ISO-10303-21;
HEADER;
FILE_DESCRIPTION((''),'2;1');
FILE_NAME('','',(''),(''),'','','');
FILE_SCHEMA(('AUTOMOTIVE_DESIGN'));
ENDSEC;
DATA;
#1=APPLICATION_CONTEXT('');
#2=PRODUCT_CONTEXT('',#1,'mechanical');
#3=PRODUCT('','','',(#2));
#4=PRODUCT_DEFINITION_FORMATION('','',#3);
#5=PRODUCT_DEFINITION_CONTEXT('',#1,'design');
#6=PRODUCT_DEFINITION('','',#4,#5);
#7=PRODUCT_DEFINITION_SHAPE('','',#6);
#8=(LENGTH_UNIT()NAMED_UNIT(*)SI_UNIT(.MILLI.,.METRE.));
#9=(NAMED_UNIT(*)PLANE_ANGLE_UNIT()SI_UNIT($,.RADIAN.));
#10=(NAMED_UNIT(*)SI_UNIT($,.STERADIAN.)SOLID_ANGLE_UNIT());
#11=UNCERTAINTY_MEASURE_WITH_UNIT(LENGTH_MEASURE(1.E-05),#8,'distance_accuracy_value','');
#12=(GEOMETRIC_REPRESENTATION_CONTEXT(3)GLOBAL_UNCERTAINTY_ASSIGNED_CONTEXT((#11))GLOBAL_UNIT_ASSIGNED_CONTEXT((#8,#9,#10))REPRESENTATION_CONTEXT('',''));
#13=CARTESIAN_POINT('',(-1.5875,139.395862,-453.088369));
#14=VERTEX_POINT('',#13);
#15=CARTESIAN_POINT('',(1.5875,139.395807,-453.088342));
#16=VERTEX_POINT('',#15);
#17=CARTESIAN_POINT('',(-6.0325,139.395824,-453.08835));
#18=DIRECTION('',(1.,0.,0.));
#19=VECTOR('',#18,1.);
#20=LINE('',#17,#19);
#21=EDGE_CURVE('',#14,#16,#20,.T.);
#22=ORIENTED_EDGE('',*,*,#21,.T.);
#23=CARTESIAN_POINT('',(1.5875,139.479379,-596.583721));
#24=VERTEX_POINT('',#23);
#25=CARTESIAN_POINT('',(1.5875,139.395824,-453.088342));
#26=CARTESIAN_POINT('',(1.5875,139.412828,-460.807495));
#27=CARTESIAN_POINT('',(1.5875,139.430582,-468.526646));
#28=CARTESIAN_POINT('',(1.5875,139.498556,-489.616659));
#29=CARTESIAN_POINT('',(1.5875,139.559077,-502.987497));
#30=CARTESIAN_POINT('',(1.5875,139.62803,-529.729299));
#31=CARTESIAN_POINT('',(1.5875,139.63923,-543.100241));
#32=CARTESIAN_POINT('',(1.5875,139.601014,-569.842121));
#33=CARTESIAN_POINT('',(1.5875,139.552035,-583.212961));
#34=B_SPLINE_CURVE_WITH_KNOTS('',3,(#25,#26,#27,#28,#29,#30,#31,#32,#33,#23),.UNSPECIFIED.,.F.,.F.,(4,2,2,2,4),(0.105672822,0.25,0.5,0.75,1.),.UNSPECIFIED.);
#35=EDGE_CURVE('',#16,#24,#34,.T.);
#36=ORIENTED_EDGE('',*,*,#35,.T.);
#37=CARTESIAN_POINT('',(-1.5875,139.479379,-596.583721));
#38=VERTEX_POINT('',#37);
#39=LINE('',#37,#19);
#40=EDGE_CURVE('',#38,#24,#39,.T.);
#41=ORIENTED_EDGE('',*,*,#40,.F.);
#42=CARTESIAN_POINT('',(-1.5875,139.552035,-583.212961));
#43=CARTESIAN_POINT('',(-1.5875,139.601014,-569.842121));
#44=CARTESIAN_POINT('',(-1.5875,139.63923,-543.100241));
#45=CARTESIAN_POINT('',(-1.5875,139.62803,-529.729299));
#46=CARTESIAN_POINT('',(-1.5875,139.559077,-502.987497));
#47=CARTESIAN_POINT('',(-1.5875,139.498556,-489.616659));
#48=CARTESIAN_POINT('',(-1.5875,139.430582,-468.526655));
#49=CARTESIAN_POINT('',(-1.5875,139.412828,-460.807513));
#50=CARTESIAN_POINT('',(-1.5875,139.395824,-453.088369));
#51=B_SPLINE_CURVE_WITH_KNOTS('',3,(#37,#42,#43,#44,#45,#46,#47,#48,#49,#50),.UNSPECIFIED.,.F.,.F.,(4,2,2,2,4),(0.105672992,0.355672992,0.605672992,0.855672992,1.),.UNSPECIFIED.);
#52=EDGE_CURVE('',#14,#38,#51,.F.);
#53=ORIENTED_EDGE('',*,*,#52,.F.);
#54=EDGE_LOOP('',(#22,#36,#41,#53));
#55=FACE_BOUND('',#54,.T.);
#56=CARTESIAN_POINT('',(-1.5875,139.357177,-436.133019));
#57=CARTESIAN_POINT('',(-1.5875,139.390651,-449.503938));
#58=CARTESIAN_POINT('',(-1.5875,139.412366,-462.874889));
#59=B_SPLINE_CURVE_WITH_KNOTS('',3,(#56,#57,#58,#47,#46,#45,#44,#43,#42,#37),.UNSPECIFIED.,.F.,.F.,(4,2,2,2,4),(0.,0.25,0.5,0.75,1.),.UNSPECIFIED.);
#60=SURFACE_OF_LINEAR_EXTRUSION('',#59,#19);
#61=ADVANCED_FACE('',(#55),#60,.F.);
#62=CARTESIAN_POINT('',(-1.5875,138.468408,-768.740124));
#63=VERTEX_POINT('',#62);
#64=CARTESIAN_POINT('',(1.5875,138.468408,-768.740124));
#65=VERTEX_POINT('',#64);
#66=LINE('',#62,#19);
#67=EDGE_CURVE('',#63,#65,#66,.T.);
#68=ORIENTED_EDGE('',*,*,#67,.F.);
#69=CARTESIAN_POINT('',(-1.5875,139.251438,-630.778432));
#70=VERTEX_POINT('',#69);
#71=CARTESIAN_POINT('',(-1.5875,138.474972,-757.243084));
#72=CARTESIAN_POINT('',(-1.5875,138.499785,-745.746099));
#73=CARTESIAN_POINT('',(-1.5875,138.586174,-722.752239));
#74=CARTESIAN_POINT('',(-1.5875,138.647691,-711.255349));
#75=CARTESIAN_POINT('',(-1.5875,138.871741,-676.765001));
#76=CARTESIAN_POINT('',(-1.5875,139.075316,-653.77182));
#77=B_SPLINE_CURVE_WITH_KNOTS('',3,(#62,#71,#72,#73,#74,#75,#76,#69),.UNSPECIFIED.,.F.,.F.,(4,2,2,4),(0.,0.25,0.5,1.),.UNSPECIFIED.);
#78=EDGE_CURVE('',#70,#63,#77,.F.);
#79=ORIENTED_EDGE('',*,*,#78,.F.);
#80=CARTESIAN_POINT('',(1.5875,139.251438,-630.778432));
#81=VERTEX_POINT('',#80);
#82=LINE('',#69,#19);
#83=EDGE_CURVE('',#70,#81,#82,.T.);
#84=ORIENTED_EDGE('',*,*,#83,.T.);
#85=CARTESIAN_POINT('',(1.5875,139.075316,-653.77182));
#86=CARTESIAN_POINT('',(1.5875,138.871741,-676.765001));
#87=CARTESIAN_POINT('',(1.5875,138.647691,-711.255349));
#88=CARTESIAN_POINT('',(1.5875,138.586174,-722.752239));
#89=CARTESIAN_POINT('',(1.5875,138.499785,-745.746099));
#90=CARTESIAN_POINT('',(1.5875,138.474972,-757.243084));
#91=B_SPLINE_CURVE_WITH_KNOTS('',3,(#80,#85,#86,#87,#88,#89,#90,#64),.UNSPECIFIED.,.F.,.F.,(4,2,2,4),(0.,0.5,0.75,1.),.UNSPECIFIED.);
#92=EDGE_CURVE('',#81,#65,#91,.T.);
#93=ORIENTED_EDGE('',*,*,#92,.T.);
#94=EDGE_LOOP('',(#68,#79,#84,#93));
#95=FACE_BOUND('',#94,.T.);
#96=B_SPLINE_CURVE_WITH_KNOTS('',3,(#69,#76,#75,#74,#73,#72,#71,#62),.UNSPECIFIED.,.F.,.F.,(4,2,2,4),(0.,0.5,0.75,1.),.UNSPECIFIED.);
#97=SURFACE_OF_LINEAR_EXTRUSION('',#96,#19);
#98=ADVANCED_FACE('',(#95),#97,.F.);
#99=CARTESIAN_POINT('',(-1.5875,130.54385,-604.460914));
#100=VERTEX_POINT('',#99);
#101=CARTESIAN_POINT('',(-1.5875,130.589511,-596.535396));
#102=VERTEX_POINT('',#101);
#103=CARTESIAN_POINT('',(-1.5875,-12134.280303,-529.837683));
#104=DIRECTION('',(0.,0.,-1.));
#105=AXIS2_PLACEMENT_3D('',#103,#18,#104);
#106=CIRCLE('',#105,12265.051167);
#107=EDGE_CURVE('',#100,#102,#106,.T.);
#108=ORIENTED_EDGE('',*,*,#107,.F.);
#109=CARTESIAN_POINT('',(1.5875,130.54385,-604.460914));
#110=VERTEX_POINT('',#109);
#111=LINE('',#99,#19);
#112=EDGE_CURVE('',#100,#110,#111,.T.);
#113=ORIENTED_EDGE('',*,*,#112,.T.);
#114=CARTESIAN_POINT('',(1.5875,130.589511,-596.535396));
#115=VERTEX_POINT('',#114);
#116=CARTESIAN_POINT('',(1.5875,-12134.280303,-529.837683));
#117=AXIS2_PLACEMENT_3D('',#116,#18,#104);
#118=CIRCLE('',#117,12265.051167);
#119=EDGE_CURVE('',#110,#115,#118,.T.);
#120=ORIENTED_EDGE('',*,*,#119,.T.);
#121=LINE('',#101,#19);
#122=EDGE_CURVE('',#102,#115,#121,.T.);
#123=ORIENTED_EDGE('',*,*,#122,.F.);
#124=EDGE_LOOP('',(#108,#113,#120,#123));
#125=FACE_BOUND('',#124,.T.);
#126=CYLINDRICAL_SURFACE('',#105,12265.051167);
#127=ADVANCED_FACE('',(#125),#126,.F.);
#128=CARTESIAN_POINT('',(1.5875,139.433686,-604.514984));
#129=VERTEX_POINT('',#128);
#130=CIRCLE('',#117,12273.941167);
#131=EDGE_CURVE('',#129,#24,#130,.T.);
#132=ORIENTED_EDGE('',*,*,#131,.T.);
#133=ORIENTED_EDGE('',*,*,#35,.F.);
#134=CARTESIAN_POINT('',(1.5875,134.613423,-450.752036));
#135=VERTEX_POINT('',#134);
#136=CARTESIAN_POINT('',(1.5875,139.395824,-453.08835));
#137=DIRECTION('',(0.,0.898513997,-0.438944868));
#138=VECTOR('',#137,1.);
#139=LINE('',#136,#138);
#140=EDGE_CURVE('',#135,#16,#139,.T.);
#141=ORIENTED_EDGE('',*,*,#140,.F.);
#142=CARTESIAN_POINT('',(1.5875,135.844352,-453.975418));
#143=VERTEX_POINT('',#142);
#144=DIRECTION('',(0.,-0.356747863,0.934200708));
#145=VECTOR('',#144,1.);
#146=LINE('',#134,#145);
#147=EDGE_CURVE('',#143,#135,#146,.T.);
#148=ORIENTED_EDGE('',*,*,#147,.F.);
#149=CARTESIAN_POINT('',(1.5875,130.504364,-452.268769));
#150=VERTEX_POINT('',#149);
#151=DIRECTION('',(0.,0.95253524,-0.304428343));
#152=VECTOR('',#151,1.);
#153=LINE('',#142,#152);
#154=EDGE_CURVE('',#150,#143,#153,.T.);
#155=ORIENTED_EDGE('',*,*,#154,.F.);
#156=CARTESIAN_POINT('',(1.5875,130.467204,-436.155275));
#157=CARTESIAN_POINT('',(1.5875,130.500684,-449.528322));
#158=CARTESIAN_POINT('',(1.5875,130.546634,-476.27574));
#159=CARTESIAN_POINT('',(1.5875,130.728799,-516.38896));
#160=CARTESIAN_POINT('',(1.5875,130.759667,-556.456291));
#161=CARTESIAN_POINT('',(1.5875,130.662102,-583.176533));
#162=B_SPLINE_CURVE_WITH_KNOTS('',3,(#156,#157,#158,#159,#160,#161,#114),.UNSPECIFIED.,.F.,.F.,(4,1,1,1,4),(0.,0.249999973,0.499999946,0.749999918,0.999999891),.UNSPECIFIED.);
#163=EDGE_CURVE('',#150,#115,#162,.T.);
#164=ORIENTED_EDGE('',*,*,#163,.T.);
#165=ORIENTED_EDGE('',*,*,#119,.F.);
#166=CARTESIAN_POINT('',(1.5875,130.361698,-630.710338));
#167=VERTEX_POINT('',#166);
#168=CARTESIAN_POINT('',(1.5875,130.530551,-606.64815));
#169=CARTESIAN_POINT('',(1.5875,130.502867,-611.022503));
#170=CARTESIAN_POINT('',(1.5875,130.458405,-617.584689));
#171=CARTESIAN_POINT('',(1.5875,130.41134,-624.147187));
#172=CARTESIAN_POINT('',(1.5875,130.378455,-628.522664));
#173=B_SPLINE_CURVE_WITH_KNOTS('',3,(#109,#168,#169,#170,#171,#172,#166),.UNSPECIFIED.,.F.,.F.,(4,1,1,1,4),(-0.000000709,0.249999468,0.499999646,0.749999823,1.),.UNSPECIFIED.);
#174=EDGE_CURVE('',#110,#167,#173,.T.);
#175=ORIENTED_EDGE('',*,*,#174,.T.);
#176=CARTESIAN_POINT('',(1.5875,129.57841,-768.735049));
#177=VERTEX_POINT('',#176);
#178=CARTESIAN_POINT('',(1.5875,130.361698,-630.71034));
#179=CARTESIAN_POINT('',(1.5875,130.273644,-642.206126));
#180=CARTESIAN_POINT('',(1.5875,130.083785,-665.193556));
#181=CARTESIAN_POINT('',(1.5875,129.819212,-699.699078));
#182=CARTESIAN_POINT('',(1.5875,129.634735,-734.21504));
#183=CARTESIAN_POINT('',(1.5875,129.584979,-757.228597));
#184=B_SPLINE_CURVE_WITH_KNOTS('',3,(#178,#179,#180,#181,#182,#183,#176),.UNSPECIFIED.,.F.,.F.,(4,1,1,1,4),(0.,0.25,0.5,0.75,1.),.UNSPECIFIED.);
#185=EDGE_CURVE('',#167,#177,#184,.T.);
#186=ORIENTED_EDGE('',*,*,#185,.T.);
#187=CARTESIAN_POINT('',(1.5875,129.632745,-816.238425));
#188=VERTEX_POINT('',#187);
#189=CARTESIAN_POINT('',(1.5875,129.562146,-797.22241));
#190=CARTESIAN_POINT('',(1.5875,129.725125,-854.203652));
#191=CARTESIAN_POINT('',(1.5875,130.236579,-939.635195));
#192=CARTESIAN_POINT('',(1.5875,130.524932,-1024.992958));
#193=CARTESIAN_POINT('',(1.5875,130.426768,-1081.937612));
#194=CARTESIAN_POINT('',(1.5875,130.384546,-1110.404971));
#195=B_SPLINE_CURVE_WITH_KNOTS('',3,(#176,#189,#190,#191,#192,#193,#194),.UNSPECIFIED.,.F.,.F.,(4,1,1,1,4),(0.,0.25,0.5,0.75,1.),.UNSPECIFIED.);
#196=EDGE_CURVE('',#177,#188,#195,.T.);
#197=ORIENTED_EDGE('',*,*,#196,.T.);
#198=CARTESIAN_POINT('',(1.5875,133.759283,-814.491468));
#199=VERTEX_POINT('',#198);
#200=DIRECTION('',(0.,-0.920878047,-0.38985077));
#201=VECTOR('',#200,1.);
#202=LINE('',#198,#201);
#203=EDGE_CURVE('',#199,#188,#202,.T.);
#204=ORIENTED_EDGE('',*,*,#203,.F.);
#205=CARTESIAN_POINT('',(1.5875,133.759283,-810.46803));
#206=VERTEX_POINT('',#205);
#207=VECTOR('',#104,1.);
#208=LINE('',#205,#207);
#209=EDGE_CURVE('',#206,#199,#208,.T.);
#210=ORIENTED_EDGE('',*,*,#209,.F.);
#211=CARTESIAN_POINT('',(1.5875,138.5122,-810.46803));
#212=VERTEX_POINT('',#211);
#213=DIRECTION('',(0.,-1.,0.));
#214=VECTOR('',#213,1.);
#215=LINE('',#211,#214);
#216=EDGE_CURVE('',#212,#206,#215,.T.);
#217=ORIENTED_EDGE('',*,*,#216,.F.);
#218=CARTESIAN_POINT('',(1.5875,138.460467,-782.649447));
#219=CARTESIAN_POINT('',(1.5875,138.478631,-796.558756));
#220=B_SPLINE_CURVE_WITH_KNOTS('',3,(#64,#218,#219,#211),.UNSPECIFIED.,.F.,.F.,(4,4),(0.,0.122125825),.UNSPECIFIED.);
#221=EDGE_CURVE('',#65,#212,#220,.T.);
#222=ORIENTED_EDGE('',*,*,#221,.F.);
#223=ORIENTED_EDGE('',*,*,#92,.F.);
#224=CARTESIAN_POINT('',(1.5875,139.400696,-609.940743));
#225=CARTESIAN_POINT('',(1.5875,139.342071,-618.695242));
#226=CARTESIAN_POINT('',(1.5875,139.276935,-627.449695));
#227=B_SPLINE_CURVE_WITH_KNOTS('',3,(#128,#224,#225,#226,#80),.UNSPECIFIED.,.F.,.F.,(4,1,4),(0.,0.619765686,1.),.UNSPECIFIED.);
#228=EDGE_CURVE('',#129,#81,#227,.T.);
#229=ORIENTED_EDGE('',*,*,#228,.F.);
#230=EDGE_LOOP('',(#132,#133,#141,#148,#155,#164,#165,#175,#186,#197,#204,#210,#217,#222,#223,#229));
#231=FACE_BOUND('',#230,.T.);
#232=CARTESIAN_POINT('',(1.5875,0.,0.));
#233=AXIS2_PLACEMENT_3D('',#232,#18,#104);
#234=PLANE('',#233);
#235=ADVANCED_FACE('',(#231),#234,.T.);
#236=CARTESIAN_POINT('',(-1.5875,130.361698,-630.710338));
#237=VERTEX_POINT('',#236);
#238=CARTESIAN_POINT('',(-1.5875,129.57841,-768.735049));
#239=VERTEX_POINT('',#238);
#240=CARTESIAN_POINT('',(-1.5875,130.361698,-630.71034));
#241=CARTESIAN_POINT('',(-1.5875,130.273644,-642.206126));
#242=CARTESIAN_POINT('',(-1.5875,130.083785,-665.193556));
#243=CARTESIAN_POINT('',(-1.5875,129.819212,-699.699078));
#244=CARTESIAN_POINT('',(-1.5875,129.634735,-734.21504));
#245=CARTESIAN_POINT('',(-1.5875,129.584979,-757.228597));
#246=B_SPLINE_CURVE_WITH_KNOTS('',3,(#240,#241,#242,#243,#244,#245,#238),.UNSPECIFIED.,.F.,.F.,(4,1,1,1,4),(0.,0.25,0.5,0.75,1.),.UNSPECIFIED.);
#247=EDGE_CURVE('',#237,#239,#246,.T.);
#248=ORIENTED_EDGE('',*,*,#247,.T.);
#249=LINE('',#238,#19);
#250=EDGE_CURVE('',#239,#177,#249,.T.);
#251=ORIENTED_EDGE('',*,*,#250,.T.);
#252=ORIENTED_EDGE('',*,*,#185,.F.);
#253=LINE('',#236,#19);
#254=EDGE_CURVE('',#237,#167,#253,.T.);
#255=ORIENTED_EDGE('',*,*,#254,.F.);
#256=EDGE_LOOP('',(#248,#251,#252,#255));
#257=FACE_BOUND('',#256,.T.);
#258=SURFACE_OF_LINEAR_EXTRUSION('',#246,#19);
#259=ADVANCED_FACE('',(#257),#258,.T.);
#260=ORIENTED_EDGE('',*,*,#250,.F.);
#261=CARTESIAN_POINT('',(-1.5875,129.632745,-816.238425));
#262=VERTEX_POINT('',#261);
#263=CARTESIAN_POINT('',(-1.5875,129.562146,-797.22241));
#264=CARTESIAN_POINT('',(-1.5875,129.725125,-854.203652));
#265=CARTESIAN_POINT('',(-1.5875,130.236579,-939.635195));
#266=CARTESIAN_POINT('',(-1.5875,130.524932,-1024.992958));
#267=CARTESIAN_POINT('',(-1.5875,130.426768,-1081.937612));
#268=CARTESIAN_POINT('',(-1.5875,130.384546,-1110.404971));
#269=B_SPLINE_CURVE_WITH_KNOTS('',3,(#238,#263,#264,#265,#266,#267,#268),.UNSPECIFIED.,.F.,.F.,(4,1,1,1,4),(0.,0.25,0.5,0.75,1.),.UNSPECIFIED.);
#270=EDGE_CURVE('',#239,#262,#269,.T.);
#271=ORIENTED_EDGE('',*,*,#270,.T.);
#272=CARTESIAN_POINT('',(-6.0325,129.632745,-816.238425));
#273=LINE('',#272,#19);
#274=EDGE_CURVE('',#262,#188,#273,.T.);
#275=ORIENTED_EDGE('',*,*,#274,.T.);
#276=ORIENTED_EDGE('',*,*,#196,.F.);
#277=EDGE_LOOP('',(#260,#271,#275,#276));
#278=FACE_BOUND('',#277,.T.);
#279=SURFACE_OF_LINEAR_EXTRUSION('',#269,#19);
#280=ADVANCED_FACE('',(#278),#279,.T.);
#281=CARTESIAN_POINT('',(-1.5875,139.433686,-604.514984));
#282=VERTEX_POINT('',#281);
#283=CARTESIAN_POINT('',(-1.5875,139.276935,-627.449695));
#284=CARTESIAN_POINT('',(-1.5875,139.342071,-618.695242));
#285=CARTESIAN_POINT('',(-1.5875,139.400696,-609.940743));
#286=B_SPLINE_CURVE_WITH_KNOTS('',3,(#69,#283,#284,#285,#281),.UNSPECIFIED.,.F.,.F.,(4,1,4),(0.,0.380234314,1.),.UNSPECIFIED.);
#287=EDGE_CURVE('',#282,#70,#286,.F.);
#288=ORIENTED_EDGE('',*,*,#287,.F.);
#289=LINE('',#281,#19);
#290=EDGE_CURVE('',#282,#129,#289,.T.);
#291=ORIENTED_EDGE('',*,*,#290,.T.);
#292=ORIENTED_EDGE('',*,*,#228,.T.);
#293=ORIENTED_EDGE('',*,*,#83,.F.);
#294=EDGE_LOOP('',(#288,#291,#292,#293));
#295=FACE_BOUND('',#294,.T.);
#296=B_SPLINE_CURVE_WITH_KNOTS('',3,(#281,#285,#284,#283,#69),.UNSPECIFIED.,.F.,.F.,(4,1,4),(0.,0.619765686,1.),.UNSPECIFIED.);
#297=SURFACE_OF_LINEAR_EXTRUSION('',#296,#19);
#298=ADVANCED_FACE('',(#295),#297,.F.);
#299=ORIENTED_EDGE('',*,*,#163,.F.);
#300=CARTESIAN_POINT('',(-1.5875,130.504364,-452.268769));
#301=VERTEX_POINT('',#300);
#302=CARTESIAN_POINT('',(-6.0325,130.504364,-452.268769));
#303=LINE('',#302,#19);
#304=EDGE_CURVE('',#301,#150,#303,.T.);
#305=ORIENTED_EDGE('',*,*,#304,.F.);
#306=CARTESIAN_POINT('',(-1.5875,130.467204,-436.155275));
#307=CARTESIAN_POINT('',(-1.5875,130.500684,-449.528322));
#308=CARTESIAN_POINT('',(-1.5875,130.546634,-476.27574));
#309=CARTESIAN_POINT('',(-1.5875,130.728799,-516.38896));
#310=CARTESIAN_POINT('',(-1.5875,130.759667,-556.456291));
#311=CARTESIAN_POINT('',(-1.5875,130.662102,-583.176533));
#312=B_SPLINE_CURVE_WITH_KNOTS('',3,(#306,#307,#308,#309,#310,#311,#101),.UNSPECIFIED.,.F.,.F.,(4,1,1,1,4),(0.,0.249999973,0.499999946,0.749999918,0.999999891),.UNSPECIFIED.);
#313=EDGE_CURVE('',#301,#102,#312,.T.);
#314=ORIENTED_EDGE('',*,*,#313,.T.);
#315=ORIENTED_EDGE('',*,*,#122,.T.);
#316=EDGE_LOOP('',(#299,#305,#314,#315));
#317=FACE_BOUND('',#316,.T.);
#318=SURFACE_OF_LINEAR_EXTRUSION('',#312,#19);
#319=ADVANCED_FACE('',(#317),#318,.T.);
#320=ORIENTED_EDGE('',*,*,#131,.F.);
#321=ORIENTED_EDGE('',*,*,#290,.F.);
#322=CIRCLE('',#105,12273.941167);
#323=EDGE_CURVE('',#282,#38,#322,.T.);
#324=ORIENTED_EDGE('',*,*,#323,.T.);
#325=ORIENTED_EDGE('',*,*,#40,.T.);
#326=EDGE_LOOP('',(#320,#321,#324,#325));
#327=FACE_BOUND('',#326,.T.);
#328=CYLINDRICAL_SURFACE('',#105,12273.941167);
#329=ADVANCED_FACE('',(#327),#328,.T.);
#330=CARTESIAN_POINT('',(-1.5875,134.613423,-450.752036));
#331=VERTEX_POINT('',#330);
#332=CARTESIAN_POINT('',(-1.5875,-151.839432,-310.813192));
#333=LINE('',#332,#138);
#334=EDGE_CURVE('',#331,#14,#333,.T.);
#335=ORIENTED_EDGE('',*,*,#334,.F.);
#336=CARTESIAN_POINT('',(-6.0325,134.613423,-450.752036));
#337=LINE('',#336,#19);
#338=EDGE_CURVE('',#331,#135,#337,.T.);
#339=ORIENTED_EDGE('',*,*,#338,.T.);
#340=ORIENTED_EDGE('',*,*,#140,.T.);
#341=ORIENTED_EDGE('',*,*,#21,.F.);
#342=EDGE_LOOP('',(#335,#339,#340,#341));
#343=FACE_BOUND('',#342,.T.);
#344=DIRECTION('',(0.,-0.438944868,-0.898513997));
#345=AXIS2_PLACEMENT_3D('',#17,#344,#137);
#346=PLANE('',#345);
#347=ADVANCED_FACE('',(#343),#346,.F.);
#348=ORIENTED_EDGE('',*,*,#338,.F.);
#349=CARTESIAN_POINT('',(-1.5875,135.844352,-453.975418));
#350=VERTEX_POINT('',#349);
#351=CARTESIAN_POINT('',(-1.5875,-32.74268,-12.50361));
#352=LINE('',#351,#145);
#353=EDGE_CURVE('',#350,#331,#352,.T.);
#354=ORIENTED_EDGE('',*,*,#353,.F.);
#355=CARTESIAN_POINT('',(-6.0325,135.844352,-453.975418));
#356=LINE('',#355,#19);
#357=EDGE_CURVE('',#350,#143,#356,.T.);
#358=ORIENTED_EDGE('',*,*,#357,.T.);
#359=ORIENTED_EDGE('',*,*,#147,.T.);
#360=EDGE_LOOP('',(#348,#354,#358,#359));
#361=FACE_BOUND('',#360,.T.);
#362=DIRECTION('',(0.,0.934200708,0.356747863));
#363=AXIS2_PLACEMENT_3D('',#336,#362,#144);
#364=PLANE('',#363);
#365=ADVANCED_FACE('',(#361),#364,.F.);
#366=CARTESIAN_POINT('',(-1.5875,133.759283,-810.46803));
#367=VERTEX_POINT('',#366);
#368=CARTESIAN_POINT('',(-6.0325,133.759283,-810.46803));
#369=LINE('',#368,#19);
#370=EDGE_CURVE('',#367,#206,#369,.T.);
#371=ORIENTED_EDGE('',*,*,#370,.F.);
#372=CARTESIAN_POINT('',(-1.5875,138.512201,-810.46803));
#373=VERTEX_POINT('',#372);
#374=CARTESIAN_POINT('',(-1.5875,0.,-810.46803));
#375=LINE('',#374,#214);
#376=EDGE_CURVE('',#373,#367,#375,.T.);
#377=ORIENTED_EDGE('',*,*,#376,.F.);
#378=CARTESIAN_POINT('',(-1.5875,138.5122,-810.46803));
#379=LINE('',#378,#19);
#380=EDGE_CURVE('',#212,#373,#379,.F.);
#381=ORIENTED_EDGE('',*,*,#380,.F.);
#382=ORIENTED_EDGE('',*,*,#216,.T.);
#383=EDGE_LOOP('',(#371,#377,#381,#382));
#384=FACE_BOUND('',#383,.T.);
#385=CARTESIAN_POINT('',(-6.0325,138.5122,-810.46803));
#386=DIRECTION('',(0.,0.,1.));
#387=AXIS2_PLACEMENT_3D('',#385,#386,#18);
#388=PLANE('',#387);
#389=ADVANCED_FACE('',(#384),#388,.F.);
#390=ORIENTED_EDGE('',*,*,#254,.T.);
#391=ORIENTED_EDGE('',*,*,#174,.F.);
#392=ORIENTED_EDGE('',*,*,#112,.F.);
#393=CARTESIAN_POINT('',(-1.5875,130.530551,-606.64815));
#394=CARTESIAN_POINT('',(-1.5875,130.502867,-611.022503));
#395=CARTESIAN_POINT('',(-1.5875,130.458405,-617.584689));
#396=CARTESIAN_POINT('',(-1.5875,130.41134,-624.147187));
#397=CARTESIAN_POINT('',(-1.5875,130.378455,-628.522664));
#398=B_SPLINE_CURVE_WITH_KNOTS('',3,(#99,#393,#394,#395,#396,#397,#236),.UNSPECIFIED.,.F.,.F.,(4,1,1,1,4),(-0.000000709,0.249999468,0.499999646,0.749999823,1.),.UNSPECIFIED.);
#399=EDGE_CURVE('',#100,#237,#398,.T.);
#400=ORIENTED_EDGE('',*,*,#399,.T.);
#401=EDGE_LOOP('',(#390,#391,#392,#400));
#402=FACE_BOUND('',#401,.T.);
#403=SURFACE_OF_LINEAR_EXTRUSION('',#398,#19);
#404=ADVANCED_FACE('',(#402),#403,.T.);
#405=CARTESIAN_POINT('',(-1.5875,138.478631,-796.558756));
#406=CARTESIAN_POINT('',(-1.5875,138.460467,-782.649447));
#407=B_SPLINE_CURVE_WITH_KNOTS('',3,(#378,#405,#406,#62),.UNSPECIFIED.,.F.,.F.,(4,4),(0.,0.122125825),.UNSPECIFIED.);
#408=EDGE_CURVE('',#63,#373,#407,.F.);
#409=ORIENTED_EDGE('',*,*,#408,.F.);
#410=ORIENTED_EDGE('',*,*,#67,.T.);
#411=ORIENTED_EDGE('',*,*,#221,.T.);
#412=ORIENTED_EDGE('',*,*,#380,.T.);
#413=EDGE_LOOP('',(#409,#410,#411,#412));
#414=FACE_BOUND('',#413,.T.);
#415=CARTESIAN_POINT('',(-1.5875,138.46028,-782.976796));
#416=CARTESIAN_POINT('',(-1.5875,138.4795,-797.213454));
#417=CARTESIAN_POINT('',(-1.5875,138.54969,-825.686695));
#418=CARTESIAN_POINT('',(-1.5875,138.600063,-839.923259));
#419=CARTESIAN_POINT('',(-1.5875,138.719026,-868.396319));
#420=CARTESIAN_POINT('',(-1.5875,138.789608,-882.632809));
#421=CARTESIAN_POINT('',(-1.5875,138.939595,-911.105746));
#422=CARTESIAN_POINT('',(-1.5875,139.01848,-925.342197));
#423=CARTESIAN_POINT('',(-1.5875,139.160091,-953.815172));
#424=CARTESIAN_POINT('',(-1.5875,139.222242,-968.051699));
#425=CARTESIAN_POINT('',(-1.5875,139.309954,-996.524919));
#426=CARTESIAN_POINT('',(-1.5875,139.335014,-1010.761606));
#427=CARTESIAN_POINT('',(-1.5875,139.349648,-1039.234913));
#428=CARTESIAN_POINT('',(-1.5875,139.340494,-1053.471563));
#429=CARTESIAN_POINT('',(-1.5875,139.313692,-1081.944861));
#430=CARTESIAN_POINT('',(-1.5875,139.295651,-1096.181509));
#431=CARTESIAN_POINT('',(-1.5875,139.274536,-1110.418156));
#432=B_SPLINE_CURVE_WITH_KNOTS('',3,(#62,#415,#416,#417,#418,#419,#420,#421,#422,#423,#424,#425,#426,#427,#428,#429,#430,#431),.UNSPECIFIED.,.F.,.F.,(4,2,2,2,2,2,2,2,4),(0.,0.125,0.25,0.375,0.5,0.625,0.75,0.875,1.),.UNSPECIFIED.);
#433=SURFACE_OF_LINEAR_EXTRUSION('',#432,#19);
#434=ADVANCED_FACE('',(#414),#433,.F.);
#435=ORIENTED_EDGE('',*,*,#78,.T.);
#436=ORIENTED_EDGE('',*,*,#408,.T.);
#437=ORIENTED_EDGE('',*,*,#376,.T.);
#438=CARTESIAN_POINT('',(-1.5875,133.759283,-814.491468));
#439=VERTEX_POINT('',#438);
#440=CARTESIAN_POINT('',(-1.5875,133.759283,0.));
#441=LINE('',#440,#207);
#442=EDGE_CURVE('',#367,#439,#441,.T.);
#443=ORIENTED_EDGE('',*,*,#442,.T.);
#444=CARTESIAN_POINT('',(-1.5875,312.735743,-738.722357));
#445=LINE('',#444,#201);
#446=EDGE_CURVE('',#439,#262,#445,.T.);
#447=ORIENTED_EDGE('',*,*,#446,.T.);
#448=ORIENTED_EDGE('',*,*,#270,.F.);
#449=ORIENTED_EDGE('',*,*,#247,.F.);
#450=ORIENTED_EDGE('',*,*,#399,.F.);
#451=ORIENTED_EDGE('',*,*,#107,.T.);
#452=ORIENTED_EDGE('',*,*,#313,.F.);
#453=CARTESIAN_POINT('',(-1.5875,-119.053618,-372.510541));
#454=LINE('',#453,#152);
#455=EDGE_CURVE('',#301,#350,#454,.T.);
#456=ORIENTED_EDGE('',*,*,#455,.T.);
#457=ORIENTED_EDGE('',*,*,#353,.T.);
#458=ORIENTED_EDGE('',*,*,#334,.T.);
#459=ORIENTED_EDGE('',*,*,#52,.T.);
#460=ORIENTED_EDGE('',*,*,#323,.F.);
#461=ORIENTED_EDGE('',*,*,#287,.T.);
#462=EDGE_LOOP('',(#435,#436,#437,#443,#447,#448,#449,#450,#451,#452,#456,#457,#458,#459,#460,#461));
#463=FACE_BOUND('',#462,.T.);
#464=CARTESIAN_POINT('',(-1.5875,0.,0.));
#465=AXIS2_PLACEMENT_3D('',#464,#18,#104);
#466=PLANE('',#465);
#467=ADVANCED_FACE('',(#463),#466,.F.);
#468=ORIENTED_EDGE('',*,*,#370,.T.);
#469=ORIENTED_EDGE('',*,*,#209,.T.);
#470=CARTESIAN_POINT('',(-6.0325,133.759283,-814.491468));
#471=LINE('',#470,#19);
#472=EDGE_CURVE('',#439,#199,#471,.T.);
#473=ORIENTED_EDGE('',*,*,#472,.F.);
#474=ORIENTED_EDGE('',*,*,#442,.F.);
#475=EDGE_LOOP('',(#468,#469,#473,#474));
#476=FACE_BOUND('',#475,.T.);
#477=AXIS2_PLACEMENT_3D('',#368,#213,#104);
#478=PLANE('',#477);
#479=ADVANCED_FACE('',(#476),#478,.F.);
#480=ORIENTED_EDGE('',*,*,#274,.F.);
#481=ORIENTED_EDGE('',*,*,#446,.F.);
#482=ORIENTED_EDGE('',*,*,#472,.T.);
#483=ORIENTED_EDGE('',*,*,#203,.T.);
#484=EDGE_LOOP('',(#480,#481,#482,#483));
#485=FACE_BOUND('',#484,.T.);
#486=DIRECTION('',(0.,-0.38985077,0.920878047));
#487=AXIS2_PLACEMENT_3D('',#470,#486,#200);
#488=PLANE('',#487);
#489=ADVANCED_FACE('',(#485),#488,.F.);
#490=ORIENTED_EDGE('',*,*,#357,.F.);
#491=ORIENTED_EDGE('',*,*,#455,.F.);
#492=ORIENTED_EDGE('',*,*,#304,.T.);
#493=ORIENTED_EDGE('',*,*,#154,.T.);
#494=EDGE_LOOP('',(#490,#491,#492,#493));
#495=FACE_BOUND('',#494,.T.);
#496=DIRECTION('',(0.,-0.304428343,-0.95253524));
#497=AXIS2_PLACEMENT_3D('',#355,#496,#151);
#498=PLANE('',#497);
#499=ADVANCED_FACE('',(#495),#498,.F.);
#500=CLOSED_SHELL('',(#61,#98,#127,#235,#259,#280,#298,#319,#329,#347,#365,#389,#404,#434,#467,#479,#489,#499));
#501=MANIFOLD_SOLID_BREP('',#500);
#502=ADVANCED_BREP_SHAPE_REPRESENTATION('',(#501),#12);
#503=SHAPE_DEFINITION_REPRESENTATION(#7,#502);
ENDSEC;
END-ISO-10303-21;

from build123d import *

# Parameters (mm, degrees)
BOSS_EXTRUDE1_START = -1.5875
BOSS_EXTRUDE1_DEPTH = 3.175
FILLET1_R           = 2.54
CUT_EXTRUDE1_DEPTH  = 2674.191025632
FILLET2_R           = 0.762
FILLET3_R           = 0.762
CUT_EXTRUDE2_DEPTH  = 7.62


with BuildPart() as part:
    # Boss-Extrude1: read off the stored shape, not the designer's step
    # Boss-Extrude1 outline → Boss-Extrude1 (new body)
    with BuildSketch(Plane(origin=(0, 0, 0), x_dir=(0, 0, -1), z_dir=(1, 0, 0)).offset(BOSS_EXTRUDE1_START)):
        with BuildLine():
            add(Edge.make_bspline(
                [(1110.404970926, 130.384545774), (1120.170834465, 130.370061323), (1139.703057908, 130.338772026), (1168.998370974, 130.277673039), (1198.290610395, 130.194386876), (1217.81419633, 130.113940836), (1227.576506903, 130.06508052)],
                knots=[0, 0, 0, 0, 0.25, 0.5, 0.75, 1, 1, 1, 1], degree=3))
            add(Edge.make_bspline(
                [(1227.576506903, 130.06508052), (1269.911205773, 129.853195249), (1333.427746701, 129.273373321), (1418.042208161, 127.449050563), (1502.665994832, 124.913583682), (1608.454176987, 120.803299479), (1693.070073331, 116.848243245), (1735.369787733, 114.744712179)],
                knots=[0, 0, 0, 0, 0.25, 0.375, 0.5, 0.75, 1, 1, 1, 1], degree=3))
            add(Edge.make_bspline(
                [(1735.369787733, 114.744712179), (1815.995940723, 110.735232018), (1936.906650462, 104.096364548), (2098.049485168, 94.18797875), (2198.694736725, 87.314638509), (2279.130413747, 81.114418931), (2339.412950304, 76.034076608), (2399.564054334, 70.28270545), (2479.570468264, 61.127378254), (2559.292087872, 49.650907614), (2626.797554585, 38.235484735), (2656.889518578, 32.788503969), (2667.159793662, 30.877771266), (2669.54, 30.432069924)],
                knots=[0, 0, 0, 0, 0.25, 0.375, 0.5, 0.5625, 0.625, 0.6875, 0.75, 0.875, 0.9375, 0.96241067, 0.969928536, 0.969928536, 0.969928536, 0.969928536], degree=3))
            Line((2669.54, 30.432069924), (2669.54, 39.476142465))
            add(Edge.make_bspline(
                [(1735.811334709, 123.623740069), (1776.138635499, 121.618292624), (1816.460281579, 119.500621806), (1897.093668675, 115.087561885), (1937.405638896, 112.792971084), (2018.018419045, 108.018366523), (2058.319512223, 105.539122976), (2138.903780144, 100.307240032), (2179.18739793, 97.555127955), (2239.586998714, 93.080168687), (2259.716280977, 91.529837622), (2289.900442602, 89.09084343), (2299.960179135, 88.258845039), (2320.076004566, 86.552861654), (2330.132100898, 85.678962223), (2350.239356518, 83.874334847), (2360.290489794, 82.943307484), (2380.385973971, 81.003183297), (2390.430065378, 79.993418555), (2420.547026195, 76.827577532), (2440.60648589, 74.533672955), (2480.675569568, 69.556278523), (2500.68715183, 66.874150811), (2540.654290207, 61.150246295), (2560.611026428, 58.109755646), (2600.475457131, 51.702465574), (2620.382967089, 48.337538888), (2650.028116889, 43.072156367), (2659.78844051, 41.29687683), (2669.54, 39.476142465)],
                knots=[0, 0, 0, 0, 0.125, 0.125, 0.25, 0.25, 0.375, 0.375, 0.5, 0.5, 0.5625, 0.5625, 0.59375, 0.59375, 0.625, 0.625, 0.65625, 0.65625, 0.6875, 0.6875, 0.75, 0.75, 0.8125, 0.8125, 0.875, 0.875, 0.9375, 0.9375, 0.968210768, 0.968210768, 0.968210768, 0.968210768], degree=3))
            add(Edge.make_bspline(
                [(1227.621000751, 138.954969175), (1248.807303679, 138.848931677), (1269.993583155, 138.701170252), (1312.363832348, 138.270664618), (1333.547719008, 137.987407832), (1375.912368189, 137.249274813), (1397.09309738, 136.7925677), (1439.451328259, 135.701855835), (1460.629010312, 135.069210584), (1502.979101161, 133.670541385), (1524.152152736, 132.907434339), (1566.494303759, 131.284732459), (1587.663166024, 130.423163385), (1651.164052809, 127.709123983), (1693.490421561, 125.728325331), (1735.811334709, 123.623740069)],
                knots=[0, 0, 0, 0, 0.125, 0.125, 0.25, 0.25, 0.375, 0.375, 0.5, 0.5, 0.625, 0.625, 0.75, 0.75, 1, 1, 1, 1], degree=3))
            add(Edge.make_bspline(
                [(1110.418156307, 139.274535996), (1129.952027249, 139.245563914), (1149.485893504, 139.211997476), (1188.553558893, 139.115899087), (1208.087346834, 139.052735015), (1227.621000751, 138.954969175)],
                knots=[0, 0, 0, 0, 0.5, 0.5, 1, 1, 1, 1], degree=3))
            add(Edge.make_bspline(
                [(768.740124165, 138.468408213), (782.976796045, 138.460280143), (797.213453801, 138.479500079), (825.686695051, 138.549690296), (839.923258916, 138.600062665), (868.396318956, 138.719026333), (882.632808962, 138.789607972), (911.105746117, 138.939594729), (925.342197007, 139.018479563), (953.81517223, 139.160090703), (968.051699178, 139.222241505), (996.524919377, 139.30995407), (1010.761605517, 139.335014039), (1039.234912871, 139.349647552), (1053.471562869, 139.340493535), (1081.944860968, 139.313691902), (1096.181508981, 139.29565137), (1110.418156307, 139.274535996)],
                knots=[0, 0, 0, 0, 0.125, 0.125, 0.25, 0.25, 0.375, 0.375, 0.5, 0.5, 0.625, 0.625, 0.75, 0.75, 0.875, 0.875, 1, 1, 1, 1], degree=3))
            add(Edge.make_bspline(
                [(630.778432202, 139.251437536), (653.771819614, 139.075315664), (676.765000849, 138.871740519), (711.255349111, 138.647690701), (722.752238945, 138.586174182), (745.746099074, 138.499784896), (757.243084259, 138.474972158), (768.740124165, 138.468408213)],
                knots=[0, 0, 0, 0, 0.5, 0.5, 0.75, 0.75, 1, 1, 1, 1], degree=3))
            add(Edge.make_bspline(
                [(604.514984259, 139.433685568), (609.940743136, 139.400696354), (618.695242427, 139.342071397), (627.449694696, 139.276935028), (630.778432202, 139.251437536)],
                knots=[0, 0, 0, 0, 0.619765686, 1, 1, 1, 1], degree=3))
            ThreePointArc((604.514984259, 139.433685568), (600.549356142, 139.457173081), (596.583720644, 139.479379304))
            add(Edge.make_bspline(
                [(436.133018826, 139.357176562), (449.50393779, 139.390650739), (462.874888934, 139.412366015), (489.61665939, 139.498555977), (502.987497127, 139.559076553), (529.729299233, 139.628029754), (543.100240501, 139.639230481), (569.84212102, 139.601013959), (583.212960696, 139.552035302), (596.583720644, 139.479379304)],
                knots=[0, 0, 0, 0, 0.25, 0.25, 0.5, 0.5, 0.75, 0.75, 1, 1, 1, 1], degree=3))
            add(Edge.make_bspline(
                [(432.263917423, 139.347117104), (433.553617637, 139.350567112), (434.843318039, 139.353947814), (436.133018826, 139.357176562)],
                knots=[0, 0, 0, 0, 1, 1, 1, 1], degree=3))
            add(Edge.make_bspline(
                [(420.316232014, 139.305761868), (422.413235913, 139.315186344), (426.395793967, 139.330351666), (430.378363115, 139.342073082), (432.263917423, 139.347117104)],
                knots=[0, 0, 0, 0, 0.526548575, 1, 1, 1, 1], degree=3))
            add(Edge.make_bspline(
                [(376.410119779, 138.75403864), (383.726317086, 138.935561778), (391.043801196, 139.055611797), (405.679602634, 139.224192856), (412.997895507, 139.272871444), (420.316232014, 139.305761868)],
                knots=[0, 0, 0, 0, 0.5, 0.5, 1, 1, 1, 1], degree=3))
            add(Edge.make_bspline(
                [(336.49221538, 137.002990798), (349.782924989, 137.88646357), (363.094318653, 138.423658969), (376.410119779, 138.75403864)],
                knots=[0, 0, 0, 0, 1, 1, 1, 1], degree=3))
            add(Edge.make_bspline(
                [(322.369488076, 135.928469458), (327.073374868, 136.333386449), (331.781331813, 136.689844531), (336.49221538, 137.002990798)],
                knots=[0, 0, 0, 0, 1, 1, 1, 1], degree=3))
            add(Edge.make_bspline(
                [(269.769949315, 129.47895505), (274.123387467, 130.231879276), (278.485668028, 130.925946417), (287.22796256, 132.196043087), (291.608626646, 132.771988738), (300.381777496, 133.818422146), (304.774579419, 134.288963443), (313.567800313, 135.154375086), (317.967903853, 135.549407043), (322.369488076, 135.928469458)],
                knots=[0, 0, 0, 0, 0.25, 0.25, 0.5, 0.5, 0.75, 0.75, 1, 1, 1, 1], degree=3))
            add(Edge.make_bspline(
                [(135.15718457, 90.054634926), (146.043739673, 94.375230064), (156.99891695, 98.504335222), (173.56622243, 104.322560697), (179.110932848, 106.199810145), (190.24859245, 109.819698901), (195.841545849, 111.562316625), (207.065472514, 114.901345648), (212.697969124, 116.49836249), (224.005973618, 119.540534541), (229.683240596, 120.9862349), (246.767187276, 125.077694043), (258.225188059, 127.482295924), (269.769949315, 129.47895505)],
                knots=[0, 0, 0, 0, 0.25, 0.25, 0.375, 0.375, 0.5, 0.5, 0.625, 0.625, 0.75, 0.75, 1, 1, 1, 1], degree=3))
            add(Edge.make_bspline(
                [(107.049744533, 78.466050261), (116.373258882, 82.438606419), (125.737350123, 86.316143859), (135.15718457, 90.054634926)],
                knots=[0, 0, 0, 0, 1, 1, 1, 1], degree=3))
            add(Edge.make_bspline(
                [(99.06, 75.03568963), (99.223542669, 75.106424562), (100.635498802, 75.716852689), (103.297453866, 76.863328103), (105.798503999, 77.932922637), (107.049744533, 78.466050261)],
                knots=[0.484151133, 0.484151133, 0.484151133, 0.484151133, 0.515864471, 0.757931449, 1, 1, 1, 1], degree=3))
            Line((99.06, 75.03568963), (99.06, 65.345043949))
            add(Edge.make_bspline(
                [(99.06, 65.345043949), (99.380370965, 65.484464523), (100.637671455, 66.031176319), (103.17753745, 67.132002814), (106.681577323, 68.64166857), (109.249580285, 69.740028797), (110.534459652, 70.287489229)],
                knots=[0.254738807, 0.254738807, 0.254738807, 0.254738807, 0.317238807, 0.5, 0.75, 1, 1, 1, 1], degree=3))
            add(Edge.make_bspline(
                [(110.534459652, 70.287489229), (112.850658013, 71.274373329), (117.489277519, 73.236837099), (124.456688526, 76.138068453), (131.438476528, 78.994265342), (136.101204469, 80.864754132), (138.436571012, 81.791601309)],
                knots=[0, 0, 0, 0, 0.25, 0.5, 0.75, 1, 1, 1, 1], degree=3))
            add(Edge.make_bspline(
                [(138.436571012, 81.791601309), (143.826897197, 83.930883835), (154.6522834, 88.11877139), (176.408203186, 96.037596764), (203.906835742, 104.998187521), (237.39469787, 114.027149543), (259.934818065, 118.755998441), (271.284977744, 120.719001348)],
                knots=[0, 0, 0, 0, 0.125, 0.25, 0.5, 0.75, 1, 1, 1, 1], degree=3))
            add(Edge.make_bspline(
                [(271.284977744, 120.719001348), (275.558711595, 121.458140765), (284.124297478, 122.821139095), (297.036360548, 124.518896272), (310.018420247, 125.909880891), (318.766623126, 126.695286194), (323.13209925, 127.071239405)],
                knots=[5e-09, 5e-09, 5e-09, 5e-09, 0.2499992, 0.4999984, 0.7499976, 0.999996801, 0.999996801, 0.999996801, 0.999996801], degree=3))
            add(Edge.make_bspline(
                [(323.13209925, 127.071239405), (324.293050056, 127.171175344), (326.615168427, 127.365043892), (330.101568176, 127.638529754), (333.590184216, 127.895089457), (335.917953069, 128.055198639), (337.081858513, 128.132566852)],
                knots=[1.2024e-05, 1.2024e-05, 1.2024e-05, 1.2024e-05, 0.250009018, 0.500006012, 0.750003006, 1, 1, 1, 1], degree=3))
            add(Edge.make_bspline(
                [(337.081858513, 128.132566852), (340.367862287, 128.350997241), (346.939906877, 128.744909116), (356.821319657, 129.221190111), (366.716250393, 129.595096292), (373.326613137, 129.784797569), (376.630622597, 129.866773678)],
                knots=[0, 0, 0, 0, 0.25, 0.5, 0.75, 1, 1, 1, 1], degree=3))
            add(Edge.make_bspline(
                [(376.630622597, 129.866773678), (380.266394474, 129.956981294), (387.534764147, 130.106779908), (398.462206547, 130.259361028), (409.400972015, 130.358727994), (416.705417778, 130.39944419), (420.356185481, 130.415851648)],
                knots=[0, 0, 0, 0, 0.25, 0.5, 0.75, 1, 1, 1, 1], degree=3))
            add(Edge.make_bspline(
                [(420.356185481, 130.415851648), (421.350045129, 130.420318309), (423.337533562, 130.428603137), (426.320174328, 130.439402209), (429.303468332, 130.448883952), (431.293011648, 130.454488038), (432.287698861, 130.457148912)],
                knots=[0, 0, 0, 0, 0.25, 0.5, 0.75, 1, 1, 1, 1], degree=3))
            add(Edge.make_bspline(
                [(432.287698861, 130.457148912), (432.610032304, 130.45801117), (433.254717136, 130.45972707), (434.221637716, 130.462266911), (435.188505114, 130.464765142), (435.833012253, 130.466397641), (436.155274747, 130.46720442)],
                knots=[9.2e-08, 9.2e-08, 9.2e-08, 9.2e-08, 0.25, 0.5, 0.75, 1, 1, 1, 1], degree=3))
            add(Edge.make_bspline(
                [(436.155274747, 130.46720442), (449.528322363, 130.500683927), (476.275740382, 130.546633815), (516.38896029, 130.728798697), (556.456290895, 130.759667498), (583.176533448, 130.662101975), (596.535396133, 130.589510646)],
                knots=[0, 0, 0, 0, 0.249999973, 0.499999946, 0.749999918, 0.999999891, 0.999999891, 0.999999891, 0.999999891], degree=3))
            ThreePointArc((596.535396133, 130.589510646), (600.498158983, 130.567320504), (604.460914457, 130.543849998))
            add(Edge.make_bspline(
                [(604.460914457, 130.543849998), (606.648150431, 130.530551362), (611.022503017, 130.502867011), (617.584689429, 130.458405465), (624.147187284, 130.411339888), (628.522663802, 130.378455494), (630.7103385, 130.361698324)],
                knots=[-7.09e-07, -7.09e-07, -7.09e-07, -7.09e-07, 0.249999468, 0.499999646, 0.749999823, 1, 1, 1, 1], degree=3))
            add(Edge.make_bspline(
                [(630.7103385, 130.361698324), (642.206126489, 130.273644326), (665.193556095, 130.083785311), (699.699077953, 129.819212193), (734.21504011, 129.634735151), (757.228597075, 129.58497898), (768.735048644, 129.578409662)],
                knots=[0, 0, 0, 0, 0.25, 0.5, 0.75, 1, 1, 1, 1], degree=3))
            add(Edge.make_bspline(
                [(768.735048644, 129.578409662), (797.222409768, 129.56214552), (854.203652026, 129.725124503), (939.635195481, 130.236578518), (1024.992958464, 130.524931921), (1081.937612336, 130.426767717), (1110.404970926, 130.384545774)],
                knots=[0, 0, 0, 0, 0.25, 0.5, 0.75, 1, 1, 1, 1], degree=3))
        make_face()
    extrude(amount=BOSS_EXTRUDE1_DEPTH)

    # Fillet1
    fillet1_edges = [part.edges().sort_by_distance(p)[0] for p in [
        (0, 39.476142465, -2669.54),
        (0, 30.432069924, -2669.54),
        (0, 65.345043949, -99.06),
        (0, 75.03568963, -99.06),
    ]]
    fillet(fillet1_edges, radius=FILLET1_R)

    # Sketch4 → Cut-Extrude1 (cut, through all)
    with BuildSketch(Plane(origin=(1.5875, 0, 0), x_dir=(0, 0, -1), z_dir=(1, 0, 0))):
        Polygon((1827.2125, 118.895836595), (1827.2125, 110.000384115), (1827.2125, 78.791710134), (2135.1875, 78.791710134), (2135.1875, 91.599357392), (2135.1875, 100.508307819), (2135.1875, 129.353842083), (1827.2125, 129.353842083), align=None)
    extrude(amount=-CUT_EXTRUDE1_DEPTH, mode=Mode.SUBTRACT)


with BuildPart() as cut_extrude1_piece_1:
    # of the separate pieces the step leaves, piece 1, a body of its own (cut_extrude1_pieces)
    add(part.part.solids().sort_by_distance((-1.5875, 114.744712179, -1735.369787733))[0])

    # Fillet2
    fillet2_edges = [cut_extrude1_piece_1.edges().sort_by_distance(p)[0] for p in [
        (0, 118.895836595, -1827.2125),
        (0, 110.000384116, -1827.2125),
    ]]
    fillet(fillet2_edges, radius=FILLET2_R)


with BuildPart() as cut_extrude1_piece_2:
    # of the separate pieces the step leaves, piece 2, a body of its own (cut_extrude1_pieces)
    add(part.part.solids().sort_by_distance((-1.5875, 91.599357392, -2135.1875))[0])

    # Fillet3
    fillet3_edges = [cut_extrude1_piece_2.edges().sort_by_distance(p)[0] for p in [
        (0, 100.508307819, -2135.1875),
        (0, 91.599357392, -2135.1875),
    ]]
    fillet(fillet3_edges, radius=FILLET3_R)


with BuildPart() as cut_extrude2_tool:
    # Sketch5 → Cut-Extrude2 (new body)
    with BuildSketch(Plane(origin=(1.5875, 0, 0), x_dir=(0, 0, -1), z_dir=(1, 0, 0))):
        Polygon((453.088349995, 139.395824167), (450.752036301, 134.613422753), (453.975418286, 135.844351639), (452.268768997, 130.504363999), (452.268768997, 127.575945218), (73.329869983, 29.953173686), (0, 149.408643021), (453.088349995, 149.408643021), align=None)
        Polygon((810.468029574, 138.512199639), (810.468029574, 133.759282778), (814.491468237, 133.759282778), (816.238424635, 129.632745348), (816.238424635, 125.564439067), (2630.646632523, -161.702489223), (2897.593300558, 152.988782274), (810.468029574, 152.988782274), align=None)
    extrude(amount=-CUT_EXTRUDE2_DEPTH)


with BuildPart() as cut_extrude1_piece_1_1:
    add(cut_extrude1_piece_1.part)

    # Cut-Extrude2: cut by cut_extrude2_tool
    add(cut_extrude2_tool.part, mode=Mode.SUBTRACT)


with BuildPart() as cut_extrude1_piece_2_1:
    add(cut_extrude1_piece_2.part)

    # Cut-Extrude2: cut by cut_extrude2_tool
    add(cut_extrude2_tool.part, mode=Mode.SUBTRACT)


solid = cut_extrude1_piece_1_1.part
